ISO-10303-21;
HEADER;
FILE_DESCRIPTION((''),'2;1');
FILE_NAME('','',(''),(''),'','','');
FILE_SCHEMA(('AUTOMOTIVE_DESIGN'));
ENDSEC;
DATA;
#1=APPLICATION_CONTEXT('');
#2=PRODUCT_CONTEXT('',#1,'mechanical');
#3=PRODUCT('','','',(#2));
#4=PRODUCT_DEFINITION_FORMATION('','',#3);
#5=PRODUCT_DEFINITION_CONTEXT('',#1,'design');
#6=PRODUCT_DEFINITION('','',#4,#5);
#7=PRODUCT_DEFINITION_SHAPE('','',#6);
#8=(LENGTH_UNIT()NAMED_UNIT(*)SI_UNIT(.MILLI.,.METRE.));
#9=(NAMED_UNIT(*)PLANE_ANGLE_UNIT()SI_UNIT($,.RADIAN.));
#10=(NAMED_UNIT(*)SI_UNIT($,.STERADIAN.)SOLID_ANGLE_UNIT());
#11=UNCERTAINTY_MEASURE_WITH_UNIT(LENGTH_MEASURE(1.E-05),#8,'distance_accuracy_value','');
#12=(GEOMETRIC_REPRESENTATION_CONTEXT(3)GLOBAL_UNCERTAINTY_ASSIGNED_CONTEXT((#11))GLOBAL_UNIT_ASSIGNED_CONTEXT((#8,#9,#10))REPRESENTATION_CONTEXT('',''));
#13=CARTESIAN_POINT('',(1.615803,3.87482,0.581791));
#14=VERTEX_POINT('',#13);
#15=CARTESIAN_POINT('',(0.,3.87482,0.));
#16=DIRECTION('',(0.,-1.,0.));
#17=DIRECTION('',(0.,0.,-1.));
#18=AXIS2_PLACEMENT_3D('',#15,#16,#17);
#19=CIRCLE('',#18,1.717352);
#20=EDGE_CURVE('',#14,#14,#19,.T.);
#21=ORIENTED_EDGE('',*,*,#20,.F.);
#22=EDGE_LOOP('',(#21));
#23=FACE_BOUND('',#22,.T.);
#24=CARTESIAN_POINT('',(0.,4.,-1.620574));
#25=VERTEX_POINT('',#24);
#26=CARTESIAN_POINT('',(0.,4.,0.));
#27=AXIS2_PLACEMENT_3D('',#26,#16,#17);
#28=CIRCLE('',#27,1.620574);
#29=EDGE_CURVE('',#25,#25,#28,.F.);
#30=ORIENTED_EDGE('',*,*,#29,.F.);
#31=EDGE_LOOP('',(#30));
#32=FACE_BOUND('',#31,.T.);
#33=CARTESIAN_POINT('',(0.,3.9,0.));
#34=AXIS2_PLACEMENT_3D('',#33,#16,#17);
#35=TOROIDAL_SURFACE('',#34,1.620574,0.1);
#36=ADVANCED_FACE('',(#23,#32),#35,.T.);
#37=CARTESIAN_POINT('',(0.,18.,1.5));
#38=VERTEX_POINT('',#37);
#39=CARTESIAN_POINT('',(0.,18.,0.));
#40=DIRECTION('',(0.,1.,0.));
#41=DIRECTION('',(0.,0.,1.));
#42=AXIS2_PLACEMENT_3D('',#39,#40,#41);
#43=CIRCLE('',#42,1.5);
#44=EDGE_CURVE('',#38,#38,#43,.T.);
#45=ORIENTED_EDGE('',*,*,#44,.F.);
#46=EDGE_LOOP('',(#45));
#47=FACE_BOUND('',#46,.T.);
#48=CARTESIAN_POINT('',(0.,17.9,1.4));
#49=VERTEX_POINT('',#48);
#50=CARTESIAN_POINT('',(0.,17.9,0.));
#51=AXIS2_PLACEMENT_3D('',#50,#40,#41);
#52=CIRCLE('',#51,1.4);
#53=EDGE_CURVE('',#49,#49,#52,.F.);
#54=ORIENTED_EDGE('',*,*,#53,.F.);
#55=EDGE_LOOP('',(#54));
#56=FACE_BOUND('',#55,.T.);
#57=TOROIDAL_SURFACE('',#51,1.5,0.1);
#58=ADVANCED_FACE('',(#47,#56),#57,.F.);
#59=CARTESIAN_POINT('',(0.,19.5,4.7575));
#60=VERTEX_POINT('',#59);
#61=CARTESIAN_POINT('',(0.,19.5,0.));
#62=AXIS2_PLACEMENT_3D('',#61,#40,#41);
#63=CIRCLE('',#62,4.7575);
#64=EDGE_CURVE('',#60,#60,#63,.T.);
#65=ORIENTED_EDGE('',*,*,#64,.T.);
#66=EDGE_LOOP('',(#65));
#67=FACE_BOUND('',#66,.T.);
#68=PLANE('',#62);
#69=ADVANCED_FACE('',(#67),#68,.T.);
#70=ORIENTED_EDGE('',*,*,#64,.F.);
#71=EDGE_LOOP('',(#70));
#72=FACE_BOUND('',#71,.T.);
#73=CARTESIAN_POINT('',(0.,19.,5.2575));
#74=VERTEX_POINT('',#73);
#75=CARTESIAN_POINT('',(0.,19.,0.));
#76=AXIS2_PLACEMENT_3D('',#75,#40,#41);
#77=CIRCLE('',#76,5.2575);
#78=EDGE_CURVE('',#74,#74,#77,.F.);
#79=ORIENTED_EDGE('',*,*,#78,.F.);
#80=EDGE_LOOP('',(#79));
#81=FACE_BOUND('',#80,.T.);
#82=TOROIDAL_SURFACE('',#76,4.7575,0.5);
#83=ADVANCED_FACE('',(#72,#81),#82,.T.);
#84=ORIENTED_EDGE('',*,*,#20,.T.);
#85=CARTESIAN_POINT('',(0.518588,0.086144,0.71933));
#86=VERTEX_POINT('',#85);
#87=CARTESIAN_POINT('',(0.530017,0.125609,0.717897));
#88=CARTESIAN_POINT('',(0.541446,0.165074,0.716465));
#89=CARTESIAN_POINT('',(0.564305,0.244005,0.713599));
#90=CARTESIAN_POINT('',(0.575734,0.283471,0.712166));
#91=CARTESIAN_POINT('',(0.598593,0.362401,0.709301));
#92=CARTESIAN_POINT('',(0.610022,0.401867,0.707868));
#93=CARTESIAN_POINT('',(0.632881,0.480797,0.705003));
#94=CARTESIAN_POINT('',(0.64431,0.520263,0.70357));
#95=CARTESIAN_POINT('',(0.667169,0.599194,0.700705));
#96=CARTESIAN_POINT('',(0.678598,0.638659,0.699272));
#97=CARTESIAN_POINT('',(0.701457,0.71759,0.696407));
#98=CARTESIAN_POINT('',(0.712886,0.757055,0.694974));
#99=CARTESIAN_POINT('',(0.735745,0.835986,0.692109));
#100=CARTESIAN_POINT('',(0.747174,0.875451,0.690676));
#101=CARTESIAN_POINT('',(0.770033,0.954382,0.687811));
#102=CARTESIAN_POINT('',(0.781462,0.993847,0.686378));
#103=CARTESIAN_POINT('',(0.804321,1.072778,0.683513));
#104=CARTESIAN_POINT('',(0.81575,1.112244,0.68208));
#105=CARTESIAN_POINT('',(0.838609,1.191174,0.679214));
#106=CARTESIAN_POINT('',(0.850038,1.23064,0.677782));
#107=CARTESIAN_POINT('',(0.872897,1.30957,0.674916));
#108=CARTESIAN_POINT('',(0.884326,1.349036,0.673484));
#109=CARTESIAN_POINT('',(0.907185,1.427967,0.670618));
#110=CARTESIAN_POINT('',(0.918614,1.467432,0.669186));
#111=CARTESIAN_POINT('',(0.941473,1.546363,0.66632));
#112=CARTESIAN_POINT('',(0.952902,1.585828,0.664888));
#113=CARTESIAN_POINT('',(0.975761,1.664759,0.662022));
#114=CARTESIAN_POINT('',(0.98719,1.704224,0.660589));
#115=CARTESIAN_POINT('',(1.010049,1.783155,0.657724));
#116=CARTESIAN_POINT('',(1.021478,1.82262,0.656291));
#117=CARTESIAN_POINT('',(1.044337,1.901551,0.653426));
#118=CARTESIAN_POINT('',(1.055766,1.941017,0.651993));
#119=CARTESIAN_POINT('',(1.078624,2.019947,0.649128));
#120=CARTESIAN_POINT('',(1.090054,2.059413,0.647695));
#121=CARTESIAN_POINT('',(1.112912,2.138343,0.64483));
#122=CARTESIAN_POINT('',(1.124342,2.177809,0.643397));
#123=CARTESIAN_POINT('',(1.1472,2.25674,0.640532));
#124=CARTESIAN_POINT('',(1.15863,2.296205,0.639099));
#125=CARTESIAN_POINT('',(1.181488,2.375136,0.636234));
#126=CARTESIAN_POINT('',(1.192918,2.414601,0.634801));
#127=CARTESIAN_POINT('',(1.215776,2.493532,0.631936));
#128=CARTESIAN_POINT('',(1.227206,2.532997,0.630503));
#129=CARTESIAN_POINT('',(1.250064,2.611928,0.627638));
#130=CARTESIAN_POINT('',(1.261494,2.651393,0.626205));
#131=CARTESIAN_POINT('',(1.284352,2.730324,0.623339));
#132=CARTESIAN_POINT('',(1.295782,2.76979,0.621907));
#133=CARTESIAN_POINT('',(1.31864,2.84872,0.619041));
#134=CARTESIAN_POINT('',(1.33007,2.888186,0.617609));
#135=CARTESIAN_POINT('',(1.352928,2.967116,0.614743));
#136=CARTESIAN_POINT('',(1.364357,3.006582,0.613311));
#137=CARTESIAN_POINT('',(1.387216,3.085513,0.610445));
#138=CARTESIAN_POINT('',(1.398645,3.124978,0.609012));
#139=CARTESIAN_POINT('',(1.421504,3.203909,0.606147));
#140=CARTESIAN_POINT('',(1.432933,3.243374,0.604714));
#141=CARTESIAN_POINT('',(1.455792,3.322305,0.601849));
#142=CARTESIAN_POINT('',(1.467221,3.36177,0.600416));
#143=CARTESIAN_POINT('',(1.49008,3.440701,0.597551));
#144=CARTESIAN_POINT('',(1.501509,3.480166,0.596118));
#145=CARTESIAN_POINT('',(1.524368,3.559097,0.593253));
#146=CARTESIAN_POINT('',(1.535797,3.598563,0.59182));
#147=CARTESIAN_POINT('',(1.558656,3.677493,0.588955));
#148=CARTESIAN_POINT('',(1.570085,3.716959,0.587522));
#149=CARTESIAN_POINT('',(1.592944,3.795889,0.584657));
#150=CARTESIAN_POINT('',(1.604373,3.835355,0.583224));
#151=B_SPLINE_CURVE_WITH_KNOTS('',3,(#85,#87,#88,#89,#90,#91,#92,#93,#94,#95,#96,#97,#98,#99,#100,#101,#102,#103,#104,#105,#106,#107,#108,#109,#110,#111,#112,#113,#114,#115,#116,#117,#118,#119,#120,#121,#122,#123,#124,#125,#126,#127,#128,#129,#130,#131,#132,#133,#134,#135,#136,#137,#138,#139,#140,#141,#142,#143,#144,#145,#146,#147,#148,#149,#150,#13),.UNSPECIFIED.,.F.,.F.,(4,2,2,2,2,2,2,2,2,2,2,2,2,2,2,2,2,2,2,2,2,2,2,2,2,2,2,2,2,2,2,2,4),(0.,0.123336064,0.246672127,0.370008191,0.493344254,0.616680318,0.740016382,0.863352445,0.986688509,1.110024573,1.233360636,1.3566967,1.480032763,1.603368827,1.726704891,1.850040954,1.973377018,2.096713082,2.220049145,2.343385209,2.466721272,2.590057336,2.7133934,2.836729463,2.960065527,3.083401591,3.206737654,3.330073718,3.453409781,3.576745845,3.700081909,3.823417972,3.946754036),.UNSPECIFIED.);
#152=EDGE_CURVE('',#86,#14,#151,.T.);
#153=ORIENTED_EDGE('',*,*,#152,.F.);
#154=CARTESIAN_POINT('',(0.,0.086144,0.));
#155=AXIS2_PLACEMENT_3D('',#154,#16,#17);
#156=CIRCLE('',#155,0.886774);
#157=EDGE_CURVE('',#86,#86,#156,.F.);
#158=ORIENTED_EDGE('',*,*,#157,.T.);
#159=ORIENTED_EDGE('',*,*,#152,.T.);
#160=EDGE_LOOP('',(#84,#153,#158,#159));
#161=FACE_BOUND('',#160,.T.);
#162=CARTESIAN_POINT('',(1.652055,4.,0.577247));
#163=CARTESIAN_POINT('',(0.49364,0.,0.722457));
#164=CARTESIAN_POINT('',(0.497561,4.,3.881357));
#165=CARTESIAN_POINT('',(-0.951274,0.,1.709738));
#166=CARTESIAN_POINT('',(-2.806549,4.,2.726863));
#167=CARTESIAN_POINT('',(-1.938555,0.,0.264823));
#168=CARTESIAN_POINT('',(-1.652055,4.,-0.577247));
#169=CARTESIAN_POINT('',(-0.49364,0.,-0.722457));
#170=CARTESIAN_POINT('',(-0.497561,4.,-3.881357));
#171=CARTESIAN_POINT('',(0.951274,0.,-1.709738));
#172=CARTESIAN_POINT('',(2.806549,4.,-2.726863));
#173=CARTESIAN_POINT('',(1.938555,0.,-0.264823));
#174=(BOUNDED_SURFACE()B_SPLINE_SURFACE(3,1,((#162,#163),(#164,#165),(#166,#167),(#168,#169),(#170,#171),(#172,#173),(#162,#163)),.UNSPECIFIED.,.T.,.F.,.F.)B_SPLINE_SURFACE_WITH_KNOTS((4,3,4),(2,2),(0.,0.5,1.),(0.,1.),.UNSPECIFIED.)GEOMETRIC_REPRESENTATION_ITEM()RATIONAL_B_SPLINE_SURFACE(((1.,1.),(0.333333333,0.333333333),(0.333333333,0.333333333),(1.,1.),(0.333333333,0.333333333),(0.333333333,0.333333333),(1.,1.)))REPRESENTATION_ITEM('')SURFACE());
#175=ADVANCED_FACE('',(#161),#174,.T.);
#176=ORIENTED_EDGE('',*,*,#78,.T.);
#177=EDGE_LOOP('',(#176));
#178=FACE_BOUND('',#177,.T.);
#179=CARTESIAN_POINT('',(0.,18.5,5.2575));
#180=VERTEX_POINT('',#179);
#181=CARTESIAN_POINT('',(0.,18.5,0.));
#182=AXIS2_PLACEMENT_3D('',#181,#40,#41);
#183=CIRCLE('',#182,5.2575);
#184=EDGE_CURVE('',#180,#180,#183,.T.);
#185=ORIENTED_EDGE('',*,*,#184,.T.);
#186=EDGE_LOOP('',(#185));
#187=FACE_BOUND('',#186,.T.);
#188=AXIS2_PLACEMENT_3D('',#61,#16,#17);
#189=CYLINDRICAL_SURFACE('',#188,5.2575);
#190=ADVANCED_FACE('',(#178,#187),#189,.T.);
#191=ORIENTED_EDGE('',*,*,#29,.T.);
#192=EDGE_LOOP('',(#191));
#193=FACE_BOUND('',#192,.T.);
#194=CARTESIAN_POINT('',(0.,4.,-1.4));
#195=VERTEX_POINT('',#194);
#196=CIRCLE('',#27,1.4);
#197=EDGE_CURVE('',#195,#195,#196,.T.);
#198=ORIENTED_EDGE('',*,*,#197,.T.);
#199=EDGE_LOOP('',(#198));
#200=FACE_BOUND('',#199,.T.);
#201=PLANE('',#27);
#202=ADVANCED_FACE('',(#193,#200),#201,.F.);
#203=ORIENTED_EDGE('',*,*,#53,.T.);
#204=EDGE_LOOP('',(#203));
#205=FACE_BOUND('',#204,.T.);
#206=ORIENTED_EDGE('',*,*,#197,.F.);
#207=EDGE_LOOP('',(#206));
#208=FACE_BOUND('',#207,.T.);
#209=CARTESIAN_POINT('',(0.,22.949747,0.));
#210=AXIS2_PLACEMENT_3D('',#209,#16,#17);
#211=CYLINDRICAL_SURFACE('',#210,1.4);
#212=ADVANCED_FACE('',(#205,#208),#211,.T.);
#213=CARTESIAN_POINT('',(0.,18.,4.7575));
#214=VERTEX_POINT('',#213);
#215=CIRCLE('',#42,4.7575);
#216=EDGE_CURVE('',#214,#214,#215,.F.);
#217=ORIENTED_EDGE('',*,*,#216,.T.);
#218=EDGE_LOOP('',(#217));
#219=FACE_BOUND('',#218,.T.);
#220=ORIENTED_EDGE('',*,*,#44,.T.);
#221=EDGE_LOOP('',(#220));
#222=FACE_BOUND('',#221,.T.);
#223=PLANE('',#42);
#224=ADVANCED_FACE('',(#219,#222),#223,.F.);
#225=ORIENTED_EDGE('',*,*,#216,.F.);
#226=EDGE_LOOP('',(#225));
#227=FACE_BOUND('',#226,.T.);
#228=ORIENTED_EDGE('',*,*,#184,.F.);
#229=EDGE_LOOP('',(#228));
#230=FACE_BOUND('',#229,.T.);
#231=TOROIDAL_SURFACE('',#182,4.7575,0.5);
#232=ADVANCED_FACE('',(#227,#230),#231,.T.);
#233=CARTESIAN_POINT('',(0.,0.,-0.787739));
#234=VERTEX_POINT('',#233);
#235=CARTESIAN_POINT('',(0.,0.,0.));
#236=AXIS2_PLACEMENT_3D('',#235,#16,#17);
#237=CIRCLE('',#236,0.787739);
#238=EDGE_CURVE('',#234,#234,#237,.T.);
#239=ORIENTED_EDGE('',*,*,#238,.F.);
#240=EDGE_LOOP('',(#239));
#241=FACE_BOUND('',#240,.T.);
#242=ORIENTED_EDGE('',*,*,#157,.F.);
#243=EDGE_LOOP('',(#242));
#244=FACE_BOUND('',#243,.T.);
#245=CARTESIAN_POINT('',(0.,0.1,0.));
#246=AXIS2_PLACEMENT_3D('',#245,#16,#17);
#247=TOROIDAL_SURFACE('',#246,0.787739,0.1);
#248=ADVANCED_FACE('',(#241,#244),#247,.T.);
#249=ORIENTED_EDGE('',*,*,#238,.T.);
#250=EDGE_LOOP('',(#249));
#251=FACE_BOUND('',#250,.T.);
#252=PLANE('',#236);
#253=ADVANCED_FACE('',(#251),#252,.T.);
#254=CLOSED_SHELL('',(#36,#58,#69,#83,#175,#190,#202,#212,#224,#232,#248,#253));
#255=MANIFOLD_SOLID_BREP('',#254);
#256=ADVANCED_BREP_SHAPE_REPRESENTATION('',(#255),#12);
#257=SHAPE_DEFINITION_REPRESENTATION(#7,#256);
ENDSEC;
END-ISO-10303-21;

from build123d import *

# Parameters (mm, degrees)
SKETCH1_R           = 1.75
BOSS_EXTRUDE2_DEPTH = 18
SKETCH2_R           = 5.2575
BOSS_EXTRUDE3_DEPTH = 1.5
CUT_EXTRUDE1_START  = 11.5
SKETCH9_R           = 1.75
CUT_EXTRUDE1_DEPTH  = 11.5
SKETCH10_R          = 1.75
SKETCH10_R_2        = 1.4
CUT_EXTRUDE3_DEPTH  = 14
FILLET2_R           = 0.1
FILLET3_R           = 0.1
FILLET4_R           = 0.5


with BuildPart() as part:
    # Sketch1 → Boss-Extrude2 (new body)
    with BuildSketch(Plane(origin=(0, 0, 0), x_dir=(1, 0, 0), z_dir=(0, 1, 0))):
        with Locations(Location((0, 0, 0), (0, 0, 270))):
            Circle(SKETCH1_R)
    extrude(amount=BOSS_EXTRUDE2_DEPTH)

    # Sketch2 → Boss-Extrude3 (add)
    with BuildSketch(Plane(origin=(0, 18, 0), x_dir=(1, 0, 0), z_dir=(0, 1, 0))):
        with Locations(Location((0, 0, 0), (0, 0, 270))):
            Circle(SKETCH2_R)
    extrude(amount=BOSS_EXTRUDE3_DEPTH)

    # Sketch9 → Cut-Extrude1 (cut)
    with BuildSketch(Plane(origin=(0, 4, 0), x_dir=(-1, 0, 0), z_dir=(0, -1, 0)).offset(CUT_EXTRUDE1_START)):
        with Locations(Location((0, 0, 0), (0, 0, 90))):
            Circle(SKETCH9_R)
    extrude(amount=-CUT_EXTRUDE1_DEPTH, mode=Mode.SUBTRACT)

    # Loft1: read off the stored shape, not the designer's step
    # Loft1: loft between two sections, ruled curve by curve
    loft1_from = [
        Edge.make_bspline([(1.652055062, 4, 0.577246976), (0.49756111, 4, 3.8813571), (-2.806549014, 4, 2.726863148), (-1.652055062, 4, -0.577246976), (-0.49756111, 4, -3.8813571), (2.806549014, 4, -2.726863148), (1.652055062, 4, 0.577246976)], [0, 0, 0, 0, 0.5, 0.5, 0.5, 1, 1, 1, 1], 3, [1, 0.333333333, 0.333333333, 1, 0.333333333, 0.333333333, 1]),
    ]
    loft1_to = [
        Edge.make_bspline([(0.493640246, 0, 0.722457132), (-0.951274019, 0, 1.709737623), (-1.93855451, 0, 0.264823359), (-0.493640246, 0, -0.722457132), (0.951274019, 0, -1.709737623), (1.93855451, 0, -0.264823359), (0.493640246, 0, 0.722457132)], [0, 0, 0, 0, 0.5, 0.5, 0.5, 1, 1, 1, 1], 3, [1, 0.333333333, 0.333333333, 1, 0.333333333, 0.333333333, 1]),
    ]
    loft1 = Solid(Shell([*[Face.make_surface_from_curves(loft1_from[k], loft1_to[k]) for k in range(1)], Face(Wire(loft1_from)), Face(Wire(loft1_to))]))
    add(loft1)

    # Sketch10 → Cut-Extrude3 (cut)
    with BuildSketch(Plane(origin=(0, 4, 0), x_dir=(-1, 0, 0), z_dir=(0, -1, 0))):
        Circle(SKETCH10_R)
        with Locations(Location((0, 0, 0), (0, 0, 90))):
            Circle(SKETCH10_R_2, mode=Mode.SUBTRACT)
    extrude(amount=-CUT_EXTRUDE3_DEPTH, mode=Mode.SUBTRACT)

    # Fillet2
    fillet2_edges = [part.edges().sort_by_distance(p)[0] for p in [
        (-0.493640246, 0, -0.722457132),
        (-1.652055062, 4, -0.577246976),
    ]]
    fillet(fillet2_edges, radius=FILLET2_R)

    # Fillet3
    fillet3_edges = [part.edges().sort_by_distance(p)[0] for p in [
        (0, 18, 1.4),
    ]]
    fillet(fillet3_edges, radius=FILLET3_R)

    # Fillet4
    fillet4_edges = [part.edges().sort_by_distance(p)[0] for p in [
        (0, 18, -5.2575),
        (0, 19.5, -5.2575),
    ]]
    fillet(fillet4_edges, radius=FILLET4_R)


solid = part.part
